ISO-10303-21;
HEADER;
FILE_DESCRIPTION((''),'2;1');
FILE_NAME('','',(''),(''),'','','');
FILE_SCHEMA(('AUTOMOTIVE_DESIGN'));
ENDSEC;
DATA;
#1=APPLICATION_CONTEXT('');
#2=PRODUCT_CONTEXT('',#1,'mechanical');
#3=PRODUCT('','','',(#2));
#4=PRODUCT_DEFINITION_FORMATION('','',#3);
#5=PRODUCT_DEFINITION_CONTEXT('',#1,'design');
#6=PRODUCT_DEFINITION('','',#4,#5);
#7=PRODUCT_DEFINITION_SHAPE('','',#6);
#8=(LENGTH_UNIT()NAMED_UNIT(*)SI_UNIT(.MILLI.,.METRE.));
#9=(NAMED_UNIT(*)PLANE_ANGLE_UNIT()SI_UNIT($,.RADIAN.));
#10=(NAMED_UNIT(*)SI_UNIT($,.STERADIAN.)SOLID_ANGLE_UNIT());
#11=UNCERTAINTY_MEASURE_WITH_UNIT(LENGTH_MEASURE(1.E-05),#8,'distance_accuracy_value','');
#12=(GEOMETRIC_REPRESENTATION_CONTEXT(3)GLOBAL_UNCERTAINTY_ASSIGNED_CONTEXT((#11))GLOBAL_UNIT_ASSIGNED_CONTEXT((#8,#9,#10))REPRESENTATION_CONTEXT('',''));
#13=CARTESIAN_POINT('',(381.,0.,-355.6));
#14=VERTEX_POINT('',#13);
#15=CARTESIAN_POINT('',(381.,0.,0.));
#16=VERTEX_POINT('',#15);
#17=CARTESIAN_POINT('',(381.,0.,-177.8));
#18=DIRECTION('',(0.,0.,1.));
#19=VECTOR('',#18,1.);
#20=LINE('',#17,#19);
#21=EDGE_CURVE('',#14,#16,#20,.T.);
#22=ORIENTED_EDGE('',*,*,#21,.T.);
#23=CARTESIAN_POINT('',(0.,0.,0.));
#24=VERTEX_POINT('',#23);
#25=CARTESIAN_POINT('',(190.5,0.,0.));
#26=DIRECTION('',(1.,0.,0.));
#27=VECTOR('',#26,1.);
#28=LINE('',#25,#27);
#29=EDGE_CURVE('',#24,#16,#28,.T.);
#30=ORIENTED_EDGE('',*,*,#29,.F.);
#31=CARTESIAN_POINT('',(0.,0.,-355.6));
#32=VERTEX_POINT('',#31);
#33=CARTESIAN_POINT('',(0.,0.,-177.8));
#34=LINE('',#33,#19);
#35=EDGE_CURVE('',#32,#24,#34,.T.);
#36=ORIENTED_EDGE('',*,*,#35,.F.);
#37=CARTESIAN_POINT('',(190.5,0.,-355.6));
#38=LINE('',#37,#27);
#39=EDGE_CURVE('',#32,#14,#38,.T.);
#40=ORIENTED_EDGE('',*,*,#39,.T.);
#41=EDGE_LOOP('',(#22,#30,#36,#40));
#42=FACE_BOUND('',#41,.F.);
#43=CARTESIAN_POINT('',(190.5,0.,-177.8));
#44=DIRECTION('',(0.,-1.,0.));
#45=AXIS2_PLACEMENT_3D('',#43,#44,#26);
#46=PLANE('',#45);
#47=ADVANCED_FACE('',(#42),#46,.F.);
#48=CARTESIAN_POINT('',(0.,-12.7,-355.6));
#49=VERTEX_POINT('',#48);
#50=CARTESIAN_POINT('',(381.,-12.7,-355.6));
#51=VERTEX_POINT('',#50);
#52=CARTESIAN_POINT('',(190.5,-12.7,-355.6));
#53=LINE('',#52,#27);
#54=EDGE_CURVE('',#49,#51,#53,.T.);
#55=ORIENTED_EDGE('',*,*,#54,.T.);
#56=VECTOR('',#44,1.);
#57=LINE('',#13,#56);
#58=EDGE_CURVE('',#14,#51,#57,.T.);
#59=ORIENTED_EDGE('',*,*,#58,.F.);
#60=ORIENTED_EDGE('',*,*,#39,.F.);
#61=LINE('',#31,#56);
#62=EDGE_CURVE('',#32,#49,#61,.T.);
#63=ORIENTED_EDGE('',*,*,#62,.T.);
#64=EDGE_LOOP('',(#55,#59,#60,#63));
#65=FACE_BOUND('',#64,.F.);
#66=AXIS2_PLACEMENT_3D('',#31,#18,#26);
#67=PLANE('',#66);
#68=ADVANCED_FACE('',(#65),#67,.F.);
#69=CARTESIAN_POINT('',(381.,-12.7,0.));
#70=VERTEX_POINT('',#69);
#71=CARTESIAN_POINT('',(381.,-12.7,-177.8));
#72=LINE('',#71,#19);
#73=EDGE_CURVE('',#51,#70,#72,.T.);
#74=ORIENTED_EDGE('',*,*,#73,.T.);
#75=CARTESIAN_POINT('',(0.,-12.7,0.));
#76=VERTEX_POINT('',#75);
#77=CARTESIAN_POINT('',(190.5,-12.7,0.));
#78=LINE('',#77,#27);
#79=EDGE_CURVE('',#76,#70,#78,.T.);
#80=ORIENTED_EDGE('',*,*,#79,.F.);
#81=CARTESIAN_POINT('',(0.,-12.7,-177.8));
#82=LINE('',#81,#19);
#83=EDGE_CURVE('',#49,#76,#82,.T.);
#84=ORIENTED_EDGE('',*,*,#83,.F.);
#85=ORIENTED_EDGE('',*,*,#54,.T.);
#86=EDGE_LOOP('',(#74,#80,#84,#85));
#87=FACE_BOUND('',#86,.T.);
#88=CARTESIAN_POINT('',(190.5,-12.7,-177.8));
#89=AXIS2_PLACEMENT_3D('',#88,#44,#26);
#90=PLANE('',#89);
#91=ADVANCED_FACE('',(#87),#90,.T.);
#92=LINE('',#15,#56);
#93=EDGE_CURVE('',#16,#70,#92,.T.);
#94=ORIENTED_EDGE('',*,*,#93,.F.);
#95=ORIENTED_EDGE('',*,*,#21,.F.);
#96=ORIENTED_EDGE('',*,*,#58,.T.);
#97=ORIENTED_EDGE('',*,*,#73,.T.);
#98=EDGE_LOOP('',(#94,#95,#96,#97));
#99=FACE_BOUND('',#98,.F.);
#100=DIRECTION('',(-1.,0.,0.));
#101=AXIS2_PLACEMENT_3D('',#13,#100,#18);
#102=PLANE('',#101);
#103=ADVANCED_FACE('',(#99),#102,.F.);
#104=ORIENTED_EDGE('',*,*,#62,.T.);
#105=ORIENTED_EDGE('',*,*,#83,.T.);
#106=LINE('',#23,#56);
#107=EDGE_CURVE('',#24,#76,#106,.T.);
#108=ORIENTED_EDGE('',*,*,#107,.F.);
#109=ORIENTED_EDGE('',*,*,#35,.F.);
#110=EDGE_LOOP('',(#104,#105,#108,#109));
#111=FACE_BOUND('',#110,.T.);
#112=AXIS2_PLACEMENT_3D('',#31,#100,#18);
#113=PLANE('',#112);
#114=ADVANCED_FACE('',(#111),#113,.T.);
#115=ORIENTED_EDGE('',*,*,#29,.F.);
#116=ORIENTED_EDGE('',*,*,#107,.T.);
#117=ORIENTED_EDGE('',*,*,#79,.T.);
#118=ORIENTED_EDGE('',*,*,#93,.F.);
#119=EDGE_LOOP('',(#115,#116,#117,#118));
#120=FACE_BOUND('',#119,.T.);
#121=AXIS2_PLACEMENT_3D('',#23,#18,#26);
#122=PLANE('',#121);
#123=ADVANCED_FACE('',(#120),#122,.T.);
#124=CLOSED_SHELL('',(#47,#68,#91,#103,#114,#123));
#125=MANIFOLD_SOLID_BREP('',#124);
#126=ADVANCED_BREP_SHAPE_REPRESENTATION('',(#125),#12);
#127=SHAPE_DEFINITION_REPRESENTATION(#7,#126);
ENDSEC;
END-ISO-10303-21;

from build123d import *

# Parameters (mm, degrees)
F0_W     = 381
F0_H     = 355.6
F2_DEPTH = 12.7


# Not quite as in the source:
# - a variable given as a bare number and used for a length is read in inches; the dataset says mm whatever the document's units were


with BuildPart() as f2:
    # F0 (on Front) → F2 (new body)
    with BuildSketch(Plane.XZ):
        with Locations((190.5, -177.8)):
            Rectangle(F0_W, F0_H)
    extrude(amount=F2_DEPTH)


solid = f2.part
